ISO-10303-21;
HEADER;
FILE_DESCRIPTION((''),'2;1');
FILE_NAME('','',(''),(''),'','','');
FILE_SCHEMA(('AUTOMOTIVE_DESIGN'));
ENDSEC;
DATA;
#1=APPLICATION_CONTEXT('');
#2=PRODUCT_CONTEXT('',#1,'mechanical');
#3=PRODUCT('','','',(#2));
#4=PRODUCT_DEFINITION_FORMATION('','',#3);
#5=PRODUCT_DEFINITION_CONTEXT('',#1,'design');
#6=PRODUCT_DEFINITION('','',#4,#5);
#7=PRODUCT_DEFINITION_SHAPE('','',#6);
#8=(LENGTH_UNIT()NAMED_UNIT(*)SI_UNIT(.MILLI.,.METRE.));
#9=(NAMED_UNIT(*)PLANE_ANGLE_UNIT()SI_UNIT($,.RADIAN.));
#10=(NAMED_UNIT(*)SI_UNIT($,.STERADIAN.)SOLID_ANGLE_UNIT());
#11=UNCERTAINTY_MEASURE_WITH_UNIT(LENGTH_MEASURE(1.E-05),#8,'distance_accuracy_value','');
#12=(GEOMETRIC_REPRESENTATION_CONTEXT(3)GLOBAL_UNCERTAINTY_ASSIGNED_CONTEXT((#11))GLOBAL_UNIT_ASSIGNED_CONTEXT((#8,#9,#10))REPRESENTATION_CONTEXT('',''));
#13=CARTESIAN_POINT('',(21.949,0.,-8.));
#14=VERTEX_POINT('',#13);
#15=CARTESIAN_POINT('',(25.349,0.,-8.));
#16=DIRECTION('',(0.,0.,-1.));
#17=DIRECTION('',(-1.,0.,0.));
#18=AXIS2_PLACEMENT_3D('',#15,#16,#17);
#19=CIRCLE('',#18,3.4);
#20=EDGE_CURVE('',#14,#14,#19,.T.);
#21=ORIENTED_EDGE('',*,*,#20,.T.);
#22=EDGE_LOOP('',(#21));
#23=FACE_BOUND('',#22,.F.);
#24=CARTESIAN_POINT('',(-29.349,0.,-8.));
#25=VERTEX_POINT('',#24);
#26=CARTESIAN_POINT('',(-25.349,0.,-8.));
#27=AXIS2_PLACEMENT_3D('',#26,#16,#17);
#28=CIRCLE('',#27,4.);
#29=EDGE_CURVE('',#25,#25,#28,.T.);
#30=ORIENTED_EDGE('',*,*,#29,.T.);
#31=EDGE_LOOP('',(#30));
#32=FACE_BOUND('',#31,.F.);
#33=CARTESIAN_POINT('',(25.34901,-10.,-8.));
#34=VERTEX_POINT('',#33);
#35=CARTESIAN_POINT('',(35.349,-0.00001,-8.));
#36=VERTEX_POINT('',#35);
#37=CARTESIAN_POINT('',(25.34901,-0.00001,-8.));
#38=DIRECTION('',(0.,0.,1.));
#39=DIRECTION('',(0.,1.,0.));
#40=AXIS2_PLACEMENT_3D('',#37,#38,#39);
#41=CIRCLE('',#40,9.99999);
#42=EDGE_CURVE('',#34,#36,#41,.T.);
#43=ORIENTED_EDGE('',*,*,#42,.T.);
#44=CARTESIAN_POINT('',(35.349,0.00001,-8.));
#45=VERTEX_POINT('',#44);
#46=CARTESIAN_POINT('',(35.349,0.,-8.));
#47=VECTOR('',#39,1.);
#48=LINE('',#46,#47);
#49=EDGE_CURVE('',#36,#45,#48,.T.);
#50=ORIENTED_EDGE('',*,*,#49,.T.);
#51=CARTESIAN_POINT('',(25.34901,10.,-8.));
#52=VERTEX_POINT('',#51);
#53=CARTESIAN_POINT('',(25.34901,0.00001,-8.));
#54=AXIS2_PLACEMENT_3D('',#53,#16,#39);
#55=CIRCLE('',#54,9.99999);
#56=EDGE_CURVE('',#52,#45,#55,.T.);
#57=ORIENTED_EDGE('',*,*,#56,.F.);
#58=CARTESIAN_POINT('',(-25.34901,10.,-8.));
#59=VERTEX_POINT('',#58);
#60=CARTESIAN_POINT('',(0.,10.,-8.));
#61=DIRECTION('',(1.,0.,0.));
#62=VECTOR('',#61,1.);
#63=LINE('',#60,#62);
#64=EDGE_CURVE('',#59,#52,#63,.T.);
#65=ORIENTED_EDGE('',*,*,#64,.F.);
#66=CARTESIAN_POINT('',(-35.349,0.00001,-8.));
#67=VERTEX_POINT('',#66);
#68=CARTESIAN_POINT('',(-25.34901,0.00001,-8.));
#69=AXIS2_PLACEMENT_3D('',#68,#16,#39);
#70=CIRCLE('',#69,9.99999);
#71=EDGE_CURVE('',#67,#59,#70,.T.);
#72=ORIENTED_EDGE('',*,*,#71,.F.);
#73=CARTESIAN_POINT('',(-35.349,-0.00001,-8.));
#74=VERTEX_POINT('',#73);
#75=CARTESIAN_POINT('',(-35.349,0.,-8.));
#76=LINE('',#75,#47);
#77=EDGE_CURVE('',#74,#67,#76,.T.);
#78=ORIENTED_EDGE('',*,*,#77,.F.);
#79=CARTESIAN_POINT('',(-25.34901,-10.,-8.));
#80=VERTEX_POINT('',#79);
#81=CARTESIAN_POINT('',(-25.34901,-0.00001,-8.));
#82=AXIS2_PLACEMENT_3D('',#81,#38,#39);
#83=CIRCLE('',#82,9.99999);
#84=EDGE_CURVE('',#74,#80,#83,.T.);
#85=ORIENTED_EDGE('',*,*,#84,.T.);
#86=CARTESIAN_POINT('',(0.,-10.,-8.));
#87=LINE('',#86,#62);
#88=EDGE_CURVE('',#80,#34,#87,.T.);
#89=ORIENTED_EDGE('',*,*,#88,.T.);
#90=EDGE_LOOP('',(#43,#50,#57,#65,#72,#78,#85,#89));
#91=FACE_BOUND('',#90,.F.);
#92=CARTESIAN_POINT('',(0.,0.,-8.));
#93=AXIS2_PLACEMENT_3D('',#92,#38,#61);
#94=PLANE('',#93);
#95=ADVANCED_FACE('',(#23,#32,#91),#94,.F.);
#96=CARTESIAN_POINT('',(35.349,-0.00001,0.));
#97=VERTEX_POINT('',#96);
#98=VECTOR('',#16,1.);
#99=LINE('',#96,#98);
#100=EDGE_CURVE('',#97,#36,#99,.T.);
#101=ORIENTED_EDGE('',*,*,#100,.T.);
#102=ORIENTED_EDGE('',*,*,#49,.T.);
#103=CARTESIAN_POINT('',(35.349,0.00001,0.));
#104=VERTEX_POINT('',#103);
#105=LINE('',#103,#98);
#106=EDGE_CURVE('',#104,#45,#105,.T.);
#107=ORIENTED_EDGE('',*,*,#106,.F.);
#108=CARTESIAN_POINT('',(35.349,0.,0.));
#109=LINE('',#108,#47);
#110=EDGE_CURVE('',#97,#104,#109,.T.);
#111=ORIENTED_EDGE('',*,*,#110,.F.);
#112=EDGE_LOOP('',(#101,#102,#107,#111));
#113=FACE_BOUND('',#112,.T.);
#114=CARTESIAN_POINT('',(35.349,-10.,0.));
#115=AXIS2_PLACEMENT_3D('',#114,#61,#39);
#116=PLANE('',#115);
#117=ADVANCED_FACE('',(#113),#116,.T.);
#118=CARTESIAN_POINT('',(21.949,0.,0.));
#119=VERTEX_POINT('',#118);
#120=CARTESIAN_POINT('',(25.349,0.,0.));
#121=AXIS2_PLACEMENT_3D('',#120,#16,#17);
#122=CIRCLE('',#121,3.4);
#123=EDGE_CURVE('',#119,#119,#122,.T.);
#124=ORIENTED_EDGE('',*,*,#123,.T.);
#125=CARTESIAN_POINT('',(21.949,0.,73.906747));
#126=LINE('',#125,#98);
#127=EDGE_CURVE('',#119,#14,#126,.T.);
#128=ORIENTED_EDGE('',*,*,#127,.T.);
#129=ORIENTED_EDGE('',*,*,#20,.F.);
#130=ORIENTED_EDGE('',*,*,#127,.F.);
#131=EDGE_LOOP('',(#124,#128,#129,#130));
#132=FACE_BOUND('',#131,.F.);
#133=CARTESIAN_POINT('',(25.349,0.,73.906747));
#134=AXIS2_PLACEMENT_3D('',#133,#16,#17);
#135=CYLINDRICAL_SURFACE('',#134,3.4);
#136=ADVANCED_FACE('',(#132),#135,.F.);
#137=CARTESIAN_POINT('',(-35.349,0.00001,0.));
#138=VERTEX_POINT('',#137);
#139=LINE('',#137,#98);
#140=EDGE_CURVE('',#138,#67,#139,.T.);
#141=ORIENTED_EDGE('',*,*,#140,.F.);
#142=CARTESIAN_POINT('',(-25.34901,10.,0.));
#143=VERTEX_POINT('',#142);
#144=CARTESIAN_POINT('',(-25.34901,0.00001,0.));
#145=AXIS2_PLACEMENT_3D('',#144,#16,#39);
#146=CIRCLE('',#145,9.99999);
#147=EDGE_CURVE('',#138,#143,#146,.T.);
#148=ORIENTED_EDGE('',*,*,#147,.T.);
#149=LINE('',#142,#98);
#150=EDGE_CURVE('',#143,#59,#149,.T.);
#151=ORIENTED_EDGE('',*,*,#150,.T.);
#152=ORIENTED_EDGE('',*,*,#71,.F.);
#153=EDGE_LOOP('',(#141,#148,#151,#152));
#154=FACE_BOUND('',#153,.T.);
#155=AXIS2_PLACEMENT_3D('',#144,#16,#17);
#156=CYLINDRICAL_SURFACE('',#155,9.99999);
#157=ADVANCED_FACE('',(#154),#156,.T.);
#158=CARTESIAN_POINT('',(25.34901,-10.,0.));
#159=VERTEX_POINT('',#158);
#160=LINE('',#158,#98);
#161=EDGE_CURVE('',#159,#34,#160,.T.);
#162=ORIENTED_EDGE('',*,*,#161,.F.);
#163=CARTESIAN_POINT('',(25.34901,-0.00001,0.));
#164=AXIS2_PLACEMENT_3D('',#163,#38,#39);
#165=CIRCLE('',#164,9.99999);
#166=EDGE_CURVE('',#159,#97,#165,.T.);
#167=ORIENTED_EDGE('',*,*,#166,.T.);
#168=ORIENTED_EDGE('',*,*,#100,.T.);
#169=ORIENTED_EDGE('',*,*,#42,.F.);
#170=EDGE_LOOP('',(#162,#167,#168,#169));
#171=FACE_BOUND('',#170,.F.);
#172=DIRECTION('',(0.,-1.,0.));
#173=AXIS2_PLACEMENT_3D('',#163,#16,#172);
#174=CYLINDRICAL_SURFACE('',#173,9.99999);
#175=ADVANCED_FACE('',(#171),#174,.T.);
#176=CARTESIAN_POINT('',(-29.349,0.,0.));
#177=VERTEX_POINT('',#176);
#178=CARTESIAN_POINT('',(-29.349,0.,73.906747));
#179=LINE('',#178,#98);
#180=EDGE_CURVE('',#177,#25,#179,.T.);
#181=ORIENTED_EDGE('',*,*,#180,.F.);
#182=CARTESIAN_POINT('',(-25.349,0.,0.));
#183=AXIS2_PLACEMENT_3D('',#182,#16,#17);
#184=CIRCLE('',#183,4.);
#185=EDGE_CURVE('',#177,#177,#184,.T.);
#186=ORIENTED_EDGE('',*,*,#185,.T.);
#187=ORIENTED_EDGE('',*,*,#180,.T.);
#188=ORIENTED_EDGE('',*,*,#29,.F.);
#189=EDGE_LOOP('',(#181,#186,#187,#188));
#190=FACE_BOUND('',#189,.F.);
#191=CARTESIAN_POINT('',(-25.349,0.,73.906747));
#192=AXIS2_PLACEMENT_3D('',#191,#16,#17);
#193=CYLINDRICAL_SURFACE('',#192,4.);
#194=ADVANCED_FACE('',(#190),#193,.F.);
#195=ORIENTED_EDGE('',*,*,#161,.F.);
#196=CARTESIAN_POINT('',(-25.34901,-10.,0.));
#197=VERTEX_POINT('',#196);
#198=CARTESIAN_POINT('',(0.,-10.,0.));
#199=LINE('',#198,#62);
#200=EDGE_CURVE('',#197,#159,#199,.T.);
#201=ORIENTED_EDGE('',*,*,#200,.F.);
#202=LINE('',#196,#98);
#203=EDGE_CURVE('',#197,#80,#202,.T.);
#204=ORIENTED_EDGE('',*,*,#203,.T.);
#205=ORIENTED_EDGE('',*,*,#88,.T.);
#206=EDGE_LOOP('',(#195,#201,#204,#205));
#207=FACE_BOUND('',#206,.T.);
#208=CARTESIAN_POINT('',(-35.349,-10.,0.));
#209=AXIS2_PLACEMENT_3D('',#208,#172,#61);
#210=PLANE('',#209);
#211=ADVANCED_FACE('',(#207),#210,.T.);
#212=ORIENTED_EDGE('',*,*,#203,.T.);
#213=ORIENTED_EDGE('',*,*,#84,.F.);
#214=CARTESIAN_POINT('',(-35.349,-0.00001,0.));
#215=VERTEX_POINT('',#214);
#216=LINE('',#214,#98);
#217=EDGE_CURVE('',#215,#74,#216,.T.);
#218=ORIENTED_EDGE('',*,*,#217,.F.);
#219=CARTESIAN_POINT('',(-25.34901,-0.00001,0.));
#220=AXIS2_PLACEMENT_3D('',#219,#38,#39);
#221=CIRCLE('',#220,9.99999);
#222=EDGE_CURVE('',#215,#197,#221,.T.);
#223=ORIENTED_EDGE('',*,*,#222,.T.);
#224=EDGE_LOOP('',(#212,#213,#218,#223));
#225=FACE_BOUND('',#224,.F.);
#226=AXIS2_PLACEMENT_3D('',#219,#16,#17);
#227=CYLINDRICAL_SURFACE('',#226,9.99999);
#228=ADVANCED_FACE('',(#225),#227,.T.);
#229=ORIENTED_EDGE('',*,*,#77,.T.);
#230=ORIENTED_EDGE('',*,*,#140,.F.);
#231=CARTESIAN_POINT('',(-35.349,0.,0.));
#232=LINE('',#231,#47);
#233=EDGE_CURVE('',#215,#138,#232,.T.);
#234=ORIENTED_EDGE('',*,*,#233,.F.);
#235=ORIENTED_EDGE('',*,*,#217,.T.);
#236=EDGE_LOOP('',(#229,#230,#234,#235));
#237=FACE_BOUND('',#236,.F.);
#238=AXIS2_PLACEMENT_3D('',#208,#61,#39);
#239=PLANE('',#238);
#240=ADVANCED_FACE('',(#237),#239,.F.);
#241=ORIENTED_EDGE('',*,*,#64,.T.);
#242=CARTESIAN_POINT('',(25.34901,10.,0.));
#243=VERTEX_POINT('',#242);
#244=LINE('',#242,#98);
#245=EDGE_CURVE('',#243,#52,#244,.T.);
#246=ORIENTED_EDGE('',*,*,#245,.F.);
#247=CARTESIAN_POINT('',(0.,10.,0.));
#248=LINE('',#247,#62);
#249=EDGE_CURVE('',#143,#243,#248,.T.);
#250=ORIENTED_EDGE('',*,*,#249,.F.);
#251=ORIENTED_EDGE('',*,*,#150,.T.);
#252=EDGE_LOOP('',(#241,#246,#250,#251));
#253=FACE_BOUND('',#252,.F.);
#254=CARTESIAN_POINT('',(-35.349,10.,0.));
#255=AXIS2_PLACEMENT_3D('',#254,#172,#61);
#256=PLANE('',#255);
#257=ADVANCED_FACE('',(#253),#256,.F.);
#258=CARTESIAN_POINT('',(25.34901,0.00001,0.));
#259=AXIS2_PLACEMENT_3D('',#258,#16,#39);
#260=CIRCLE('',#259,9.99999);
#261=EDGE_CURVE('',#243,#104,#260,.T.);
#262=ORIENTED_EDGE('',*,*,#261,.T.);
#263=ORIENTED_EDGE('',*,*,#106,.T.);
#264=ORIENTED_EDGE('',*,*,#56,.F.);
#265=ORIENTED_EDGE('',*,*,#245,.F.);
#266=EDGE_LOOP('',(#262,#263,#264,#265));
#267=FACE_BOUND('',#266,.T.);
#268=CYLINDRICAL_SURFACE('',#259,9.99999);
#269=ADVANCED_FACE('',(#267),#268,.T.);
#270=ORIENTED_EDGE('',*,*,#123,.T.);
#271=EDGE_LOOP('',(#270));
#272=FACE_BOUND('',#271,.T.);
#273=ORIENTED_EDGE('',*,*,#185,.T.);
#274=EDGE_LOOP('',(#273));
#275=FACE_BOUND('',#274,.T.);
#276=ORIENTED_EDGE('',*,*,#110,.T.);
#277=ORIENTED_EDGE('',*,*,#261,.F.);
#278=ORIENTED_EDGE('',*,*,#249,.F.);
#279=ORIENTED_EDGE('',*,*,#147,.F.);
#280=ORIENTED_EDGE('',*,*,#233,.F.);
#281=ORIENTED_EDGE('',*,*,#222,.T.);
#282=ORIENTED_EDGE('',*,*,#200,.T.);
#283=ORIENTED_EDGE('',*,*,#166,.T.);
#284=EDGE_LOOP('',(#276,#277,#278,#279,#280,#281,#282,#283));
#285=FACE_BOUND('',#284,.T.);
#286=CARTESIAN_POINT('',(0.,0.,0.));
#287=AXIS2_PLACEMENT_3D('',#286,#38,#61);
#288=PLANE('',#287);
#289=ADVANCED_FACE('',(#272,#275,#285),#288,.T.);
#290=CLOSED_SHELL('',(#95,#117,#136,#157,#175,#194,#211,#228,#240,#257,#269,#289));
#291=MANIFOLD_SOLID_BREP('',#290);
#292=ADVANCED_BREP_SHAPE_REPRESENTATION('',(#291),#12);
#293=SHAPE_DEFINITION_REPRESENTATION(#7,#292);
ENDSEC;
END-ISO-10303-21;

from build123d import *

# Parameters (mm, degrees)
F0_W     = 70.698
F0_H     = 20
F1_DEPTH = 8
F2_D     = 8
F3_D     = 6.8
F4_R     = 9.99999


# Not quite as in the source:
# - a fillet or chamfer is up to 0.001 mm smaller than in the source, because OpenCascade refuses the exact size


with BuildPart() as f1:
    # F0 (on Top) → F1 (new body)
    with BuildSketch(Plane.XY):
        Rectangle(F0_W, F0_H)
    extrude(amount=-F1_DEPTH)

    # F2 (through all)
    with Locations(Plane.XY):
        with Locations((-25.349, 0)):
            Hole(F2_D / 2)

    # F3 (through all)
    with Locations(Plane.XY):
        with Locations((25.349, 0)):
            Hole(F3_D / 2)

    # F4 (radius 10 in the source; OpenCascade refuses exactly that, so slightly less here)
    f4_edges = [f1.edges().sort_by_distance(p)[0] for p in [
        (35.349, 10, -4),
        (35.349, -10, -4),
        (-35.349, 10, -4),
        (-35.349, -10, -4),
    ]]
    fillet(f4_edges, radius=F4_R)


solid = f1.part
